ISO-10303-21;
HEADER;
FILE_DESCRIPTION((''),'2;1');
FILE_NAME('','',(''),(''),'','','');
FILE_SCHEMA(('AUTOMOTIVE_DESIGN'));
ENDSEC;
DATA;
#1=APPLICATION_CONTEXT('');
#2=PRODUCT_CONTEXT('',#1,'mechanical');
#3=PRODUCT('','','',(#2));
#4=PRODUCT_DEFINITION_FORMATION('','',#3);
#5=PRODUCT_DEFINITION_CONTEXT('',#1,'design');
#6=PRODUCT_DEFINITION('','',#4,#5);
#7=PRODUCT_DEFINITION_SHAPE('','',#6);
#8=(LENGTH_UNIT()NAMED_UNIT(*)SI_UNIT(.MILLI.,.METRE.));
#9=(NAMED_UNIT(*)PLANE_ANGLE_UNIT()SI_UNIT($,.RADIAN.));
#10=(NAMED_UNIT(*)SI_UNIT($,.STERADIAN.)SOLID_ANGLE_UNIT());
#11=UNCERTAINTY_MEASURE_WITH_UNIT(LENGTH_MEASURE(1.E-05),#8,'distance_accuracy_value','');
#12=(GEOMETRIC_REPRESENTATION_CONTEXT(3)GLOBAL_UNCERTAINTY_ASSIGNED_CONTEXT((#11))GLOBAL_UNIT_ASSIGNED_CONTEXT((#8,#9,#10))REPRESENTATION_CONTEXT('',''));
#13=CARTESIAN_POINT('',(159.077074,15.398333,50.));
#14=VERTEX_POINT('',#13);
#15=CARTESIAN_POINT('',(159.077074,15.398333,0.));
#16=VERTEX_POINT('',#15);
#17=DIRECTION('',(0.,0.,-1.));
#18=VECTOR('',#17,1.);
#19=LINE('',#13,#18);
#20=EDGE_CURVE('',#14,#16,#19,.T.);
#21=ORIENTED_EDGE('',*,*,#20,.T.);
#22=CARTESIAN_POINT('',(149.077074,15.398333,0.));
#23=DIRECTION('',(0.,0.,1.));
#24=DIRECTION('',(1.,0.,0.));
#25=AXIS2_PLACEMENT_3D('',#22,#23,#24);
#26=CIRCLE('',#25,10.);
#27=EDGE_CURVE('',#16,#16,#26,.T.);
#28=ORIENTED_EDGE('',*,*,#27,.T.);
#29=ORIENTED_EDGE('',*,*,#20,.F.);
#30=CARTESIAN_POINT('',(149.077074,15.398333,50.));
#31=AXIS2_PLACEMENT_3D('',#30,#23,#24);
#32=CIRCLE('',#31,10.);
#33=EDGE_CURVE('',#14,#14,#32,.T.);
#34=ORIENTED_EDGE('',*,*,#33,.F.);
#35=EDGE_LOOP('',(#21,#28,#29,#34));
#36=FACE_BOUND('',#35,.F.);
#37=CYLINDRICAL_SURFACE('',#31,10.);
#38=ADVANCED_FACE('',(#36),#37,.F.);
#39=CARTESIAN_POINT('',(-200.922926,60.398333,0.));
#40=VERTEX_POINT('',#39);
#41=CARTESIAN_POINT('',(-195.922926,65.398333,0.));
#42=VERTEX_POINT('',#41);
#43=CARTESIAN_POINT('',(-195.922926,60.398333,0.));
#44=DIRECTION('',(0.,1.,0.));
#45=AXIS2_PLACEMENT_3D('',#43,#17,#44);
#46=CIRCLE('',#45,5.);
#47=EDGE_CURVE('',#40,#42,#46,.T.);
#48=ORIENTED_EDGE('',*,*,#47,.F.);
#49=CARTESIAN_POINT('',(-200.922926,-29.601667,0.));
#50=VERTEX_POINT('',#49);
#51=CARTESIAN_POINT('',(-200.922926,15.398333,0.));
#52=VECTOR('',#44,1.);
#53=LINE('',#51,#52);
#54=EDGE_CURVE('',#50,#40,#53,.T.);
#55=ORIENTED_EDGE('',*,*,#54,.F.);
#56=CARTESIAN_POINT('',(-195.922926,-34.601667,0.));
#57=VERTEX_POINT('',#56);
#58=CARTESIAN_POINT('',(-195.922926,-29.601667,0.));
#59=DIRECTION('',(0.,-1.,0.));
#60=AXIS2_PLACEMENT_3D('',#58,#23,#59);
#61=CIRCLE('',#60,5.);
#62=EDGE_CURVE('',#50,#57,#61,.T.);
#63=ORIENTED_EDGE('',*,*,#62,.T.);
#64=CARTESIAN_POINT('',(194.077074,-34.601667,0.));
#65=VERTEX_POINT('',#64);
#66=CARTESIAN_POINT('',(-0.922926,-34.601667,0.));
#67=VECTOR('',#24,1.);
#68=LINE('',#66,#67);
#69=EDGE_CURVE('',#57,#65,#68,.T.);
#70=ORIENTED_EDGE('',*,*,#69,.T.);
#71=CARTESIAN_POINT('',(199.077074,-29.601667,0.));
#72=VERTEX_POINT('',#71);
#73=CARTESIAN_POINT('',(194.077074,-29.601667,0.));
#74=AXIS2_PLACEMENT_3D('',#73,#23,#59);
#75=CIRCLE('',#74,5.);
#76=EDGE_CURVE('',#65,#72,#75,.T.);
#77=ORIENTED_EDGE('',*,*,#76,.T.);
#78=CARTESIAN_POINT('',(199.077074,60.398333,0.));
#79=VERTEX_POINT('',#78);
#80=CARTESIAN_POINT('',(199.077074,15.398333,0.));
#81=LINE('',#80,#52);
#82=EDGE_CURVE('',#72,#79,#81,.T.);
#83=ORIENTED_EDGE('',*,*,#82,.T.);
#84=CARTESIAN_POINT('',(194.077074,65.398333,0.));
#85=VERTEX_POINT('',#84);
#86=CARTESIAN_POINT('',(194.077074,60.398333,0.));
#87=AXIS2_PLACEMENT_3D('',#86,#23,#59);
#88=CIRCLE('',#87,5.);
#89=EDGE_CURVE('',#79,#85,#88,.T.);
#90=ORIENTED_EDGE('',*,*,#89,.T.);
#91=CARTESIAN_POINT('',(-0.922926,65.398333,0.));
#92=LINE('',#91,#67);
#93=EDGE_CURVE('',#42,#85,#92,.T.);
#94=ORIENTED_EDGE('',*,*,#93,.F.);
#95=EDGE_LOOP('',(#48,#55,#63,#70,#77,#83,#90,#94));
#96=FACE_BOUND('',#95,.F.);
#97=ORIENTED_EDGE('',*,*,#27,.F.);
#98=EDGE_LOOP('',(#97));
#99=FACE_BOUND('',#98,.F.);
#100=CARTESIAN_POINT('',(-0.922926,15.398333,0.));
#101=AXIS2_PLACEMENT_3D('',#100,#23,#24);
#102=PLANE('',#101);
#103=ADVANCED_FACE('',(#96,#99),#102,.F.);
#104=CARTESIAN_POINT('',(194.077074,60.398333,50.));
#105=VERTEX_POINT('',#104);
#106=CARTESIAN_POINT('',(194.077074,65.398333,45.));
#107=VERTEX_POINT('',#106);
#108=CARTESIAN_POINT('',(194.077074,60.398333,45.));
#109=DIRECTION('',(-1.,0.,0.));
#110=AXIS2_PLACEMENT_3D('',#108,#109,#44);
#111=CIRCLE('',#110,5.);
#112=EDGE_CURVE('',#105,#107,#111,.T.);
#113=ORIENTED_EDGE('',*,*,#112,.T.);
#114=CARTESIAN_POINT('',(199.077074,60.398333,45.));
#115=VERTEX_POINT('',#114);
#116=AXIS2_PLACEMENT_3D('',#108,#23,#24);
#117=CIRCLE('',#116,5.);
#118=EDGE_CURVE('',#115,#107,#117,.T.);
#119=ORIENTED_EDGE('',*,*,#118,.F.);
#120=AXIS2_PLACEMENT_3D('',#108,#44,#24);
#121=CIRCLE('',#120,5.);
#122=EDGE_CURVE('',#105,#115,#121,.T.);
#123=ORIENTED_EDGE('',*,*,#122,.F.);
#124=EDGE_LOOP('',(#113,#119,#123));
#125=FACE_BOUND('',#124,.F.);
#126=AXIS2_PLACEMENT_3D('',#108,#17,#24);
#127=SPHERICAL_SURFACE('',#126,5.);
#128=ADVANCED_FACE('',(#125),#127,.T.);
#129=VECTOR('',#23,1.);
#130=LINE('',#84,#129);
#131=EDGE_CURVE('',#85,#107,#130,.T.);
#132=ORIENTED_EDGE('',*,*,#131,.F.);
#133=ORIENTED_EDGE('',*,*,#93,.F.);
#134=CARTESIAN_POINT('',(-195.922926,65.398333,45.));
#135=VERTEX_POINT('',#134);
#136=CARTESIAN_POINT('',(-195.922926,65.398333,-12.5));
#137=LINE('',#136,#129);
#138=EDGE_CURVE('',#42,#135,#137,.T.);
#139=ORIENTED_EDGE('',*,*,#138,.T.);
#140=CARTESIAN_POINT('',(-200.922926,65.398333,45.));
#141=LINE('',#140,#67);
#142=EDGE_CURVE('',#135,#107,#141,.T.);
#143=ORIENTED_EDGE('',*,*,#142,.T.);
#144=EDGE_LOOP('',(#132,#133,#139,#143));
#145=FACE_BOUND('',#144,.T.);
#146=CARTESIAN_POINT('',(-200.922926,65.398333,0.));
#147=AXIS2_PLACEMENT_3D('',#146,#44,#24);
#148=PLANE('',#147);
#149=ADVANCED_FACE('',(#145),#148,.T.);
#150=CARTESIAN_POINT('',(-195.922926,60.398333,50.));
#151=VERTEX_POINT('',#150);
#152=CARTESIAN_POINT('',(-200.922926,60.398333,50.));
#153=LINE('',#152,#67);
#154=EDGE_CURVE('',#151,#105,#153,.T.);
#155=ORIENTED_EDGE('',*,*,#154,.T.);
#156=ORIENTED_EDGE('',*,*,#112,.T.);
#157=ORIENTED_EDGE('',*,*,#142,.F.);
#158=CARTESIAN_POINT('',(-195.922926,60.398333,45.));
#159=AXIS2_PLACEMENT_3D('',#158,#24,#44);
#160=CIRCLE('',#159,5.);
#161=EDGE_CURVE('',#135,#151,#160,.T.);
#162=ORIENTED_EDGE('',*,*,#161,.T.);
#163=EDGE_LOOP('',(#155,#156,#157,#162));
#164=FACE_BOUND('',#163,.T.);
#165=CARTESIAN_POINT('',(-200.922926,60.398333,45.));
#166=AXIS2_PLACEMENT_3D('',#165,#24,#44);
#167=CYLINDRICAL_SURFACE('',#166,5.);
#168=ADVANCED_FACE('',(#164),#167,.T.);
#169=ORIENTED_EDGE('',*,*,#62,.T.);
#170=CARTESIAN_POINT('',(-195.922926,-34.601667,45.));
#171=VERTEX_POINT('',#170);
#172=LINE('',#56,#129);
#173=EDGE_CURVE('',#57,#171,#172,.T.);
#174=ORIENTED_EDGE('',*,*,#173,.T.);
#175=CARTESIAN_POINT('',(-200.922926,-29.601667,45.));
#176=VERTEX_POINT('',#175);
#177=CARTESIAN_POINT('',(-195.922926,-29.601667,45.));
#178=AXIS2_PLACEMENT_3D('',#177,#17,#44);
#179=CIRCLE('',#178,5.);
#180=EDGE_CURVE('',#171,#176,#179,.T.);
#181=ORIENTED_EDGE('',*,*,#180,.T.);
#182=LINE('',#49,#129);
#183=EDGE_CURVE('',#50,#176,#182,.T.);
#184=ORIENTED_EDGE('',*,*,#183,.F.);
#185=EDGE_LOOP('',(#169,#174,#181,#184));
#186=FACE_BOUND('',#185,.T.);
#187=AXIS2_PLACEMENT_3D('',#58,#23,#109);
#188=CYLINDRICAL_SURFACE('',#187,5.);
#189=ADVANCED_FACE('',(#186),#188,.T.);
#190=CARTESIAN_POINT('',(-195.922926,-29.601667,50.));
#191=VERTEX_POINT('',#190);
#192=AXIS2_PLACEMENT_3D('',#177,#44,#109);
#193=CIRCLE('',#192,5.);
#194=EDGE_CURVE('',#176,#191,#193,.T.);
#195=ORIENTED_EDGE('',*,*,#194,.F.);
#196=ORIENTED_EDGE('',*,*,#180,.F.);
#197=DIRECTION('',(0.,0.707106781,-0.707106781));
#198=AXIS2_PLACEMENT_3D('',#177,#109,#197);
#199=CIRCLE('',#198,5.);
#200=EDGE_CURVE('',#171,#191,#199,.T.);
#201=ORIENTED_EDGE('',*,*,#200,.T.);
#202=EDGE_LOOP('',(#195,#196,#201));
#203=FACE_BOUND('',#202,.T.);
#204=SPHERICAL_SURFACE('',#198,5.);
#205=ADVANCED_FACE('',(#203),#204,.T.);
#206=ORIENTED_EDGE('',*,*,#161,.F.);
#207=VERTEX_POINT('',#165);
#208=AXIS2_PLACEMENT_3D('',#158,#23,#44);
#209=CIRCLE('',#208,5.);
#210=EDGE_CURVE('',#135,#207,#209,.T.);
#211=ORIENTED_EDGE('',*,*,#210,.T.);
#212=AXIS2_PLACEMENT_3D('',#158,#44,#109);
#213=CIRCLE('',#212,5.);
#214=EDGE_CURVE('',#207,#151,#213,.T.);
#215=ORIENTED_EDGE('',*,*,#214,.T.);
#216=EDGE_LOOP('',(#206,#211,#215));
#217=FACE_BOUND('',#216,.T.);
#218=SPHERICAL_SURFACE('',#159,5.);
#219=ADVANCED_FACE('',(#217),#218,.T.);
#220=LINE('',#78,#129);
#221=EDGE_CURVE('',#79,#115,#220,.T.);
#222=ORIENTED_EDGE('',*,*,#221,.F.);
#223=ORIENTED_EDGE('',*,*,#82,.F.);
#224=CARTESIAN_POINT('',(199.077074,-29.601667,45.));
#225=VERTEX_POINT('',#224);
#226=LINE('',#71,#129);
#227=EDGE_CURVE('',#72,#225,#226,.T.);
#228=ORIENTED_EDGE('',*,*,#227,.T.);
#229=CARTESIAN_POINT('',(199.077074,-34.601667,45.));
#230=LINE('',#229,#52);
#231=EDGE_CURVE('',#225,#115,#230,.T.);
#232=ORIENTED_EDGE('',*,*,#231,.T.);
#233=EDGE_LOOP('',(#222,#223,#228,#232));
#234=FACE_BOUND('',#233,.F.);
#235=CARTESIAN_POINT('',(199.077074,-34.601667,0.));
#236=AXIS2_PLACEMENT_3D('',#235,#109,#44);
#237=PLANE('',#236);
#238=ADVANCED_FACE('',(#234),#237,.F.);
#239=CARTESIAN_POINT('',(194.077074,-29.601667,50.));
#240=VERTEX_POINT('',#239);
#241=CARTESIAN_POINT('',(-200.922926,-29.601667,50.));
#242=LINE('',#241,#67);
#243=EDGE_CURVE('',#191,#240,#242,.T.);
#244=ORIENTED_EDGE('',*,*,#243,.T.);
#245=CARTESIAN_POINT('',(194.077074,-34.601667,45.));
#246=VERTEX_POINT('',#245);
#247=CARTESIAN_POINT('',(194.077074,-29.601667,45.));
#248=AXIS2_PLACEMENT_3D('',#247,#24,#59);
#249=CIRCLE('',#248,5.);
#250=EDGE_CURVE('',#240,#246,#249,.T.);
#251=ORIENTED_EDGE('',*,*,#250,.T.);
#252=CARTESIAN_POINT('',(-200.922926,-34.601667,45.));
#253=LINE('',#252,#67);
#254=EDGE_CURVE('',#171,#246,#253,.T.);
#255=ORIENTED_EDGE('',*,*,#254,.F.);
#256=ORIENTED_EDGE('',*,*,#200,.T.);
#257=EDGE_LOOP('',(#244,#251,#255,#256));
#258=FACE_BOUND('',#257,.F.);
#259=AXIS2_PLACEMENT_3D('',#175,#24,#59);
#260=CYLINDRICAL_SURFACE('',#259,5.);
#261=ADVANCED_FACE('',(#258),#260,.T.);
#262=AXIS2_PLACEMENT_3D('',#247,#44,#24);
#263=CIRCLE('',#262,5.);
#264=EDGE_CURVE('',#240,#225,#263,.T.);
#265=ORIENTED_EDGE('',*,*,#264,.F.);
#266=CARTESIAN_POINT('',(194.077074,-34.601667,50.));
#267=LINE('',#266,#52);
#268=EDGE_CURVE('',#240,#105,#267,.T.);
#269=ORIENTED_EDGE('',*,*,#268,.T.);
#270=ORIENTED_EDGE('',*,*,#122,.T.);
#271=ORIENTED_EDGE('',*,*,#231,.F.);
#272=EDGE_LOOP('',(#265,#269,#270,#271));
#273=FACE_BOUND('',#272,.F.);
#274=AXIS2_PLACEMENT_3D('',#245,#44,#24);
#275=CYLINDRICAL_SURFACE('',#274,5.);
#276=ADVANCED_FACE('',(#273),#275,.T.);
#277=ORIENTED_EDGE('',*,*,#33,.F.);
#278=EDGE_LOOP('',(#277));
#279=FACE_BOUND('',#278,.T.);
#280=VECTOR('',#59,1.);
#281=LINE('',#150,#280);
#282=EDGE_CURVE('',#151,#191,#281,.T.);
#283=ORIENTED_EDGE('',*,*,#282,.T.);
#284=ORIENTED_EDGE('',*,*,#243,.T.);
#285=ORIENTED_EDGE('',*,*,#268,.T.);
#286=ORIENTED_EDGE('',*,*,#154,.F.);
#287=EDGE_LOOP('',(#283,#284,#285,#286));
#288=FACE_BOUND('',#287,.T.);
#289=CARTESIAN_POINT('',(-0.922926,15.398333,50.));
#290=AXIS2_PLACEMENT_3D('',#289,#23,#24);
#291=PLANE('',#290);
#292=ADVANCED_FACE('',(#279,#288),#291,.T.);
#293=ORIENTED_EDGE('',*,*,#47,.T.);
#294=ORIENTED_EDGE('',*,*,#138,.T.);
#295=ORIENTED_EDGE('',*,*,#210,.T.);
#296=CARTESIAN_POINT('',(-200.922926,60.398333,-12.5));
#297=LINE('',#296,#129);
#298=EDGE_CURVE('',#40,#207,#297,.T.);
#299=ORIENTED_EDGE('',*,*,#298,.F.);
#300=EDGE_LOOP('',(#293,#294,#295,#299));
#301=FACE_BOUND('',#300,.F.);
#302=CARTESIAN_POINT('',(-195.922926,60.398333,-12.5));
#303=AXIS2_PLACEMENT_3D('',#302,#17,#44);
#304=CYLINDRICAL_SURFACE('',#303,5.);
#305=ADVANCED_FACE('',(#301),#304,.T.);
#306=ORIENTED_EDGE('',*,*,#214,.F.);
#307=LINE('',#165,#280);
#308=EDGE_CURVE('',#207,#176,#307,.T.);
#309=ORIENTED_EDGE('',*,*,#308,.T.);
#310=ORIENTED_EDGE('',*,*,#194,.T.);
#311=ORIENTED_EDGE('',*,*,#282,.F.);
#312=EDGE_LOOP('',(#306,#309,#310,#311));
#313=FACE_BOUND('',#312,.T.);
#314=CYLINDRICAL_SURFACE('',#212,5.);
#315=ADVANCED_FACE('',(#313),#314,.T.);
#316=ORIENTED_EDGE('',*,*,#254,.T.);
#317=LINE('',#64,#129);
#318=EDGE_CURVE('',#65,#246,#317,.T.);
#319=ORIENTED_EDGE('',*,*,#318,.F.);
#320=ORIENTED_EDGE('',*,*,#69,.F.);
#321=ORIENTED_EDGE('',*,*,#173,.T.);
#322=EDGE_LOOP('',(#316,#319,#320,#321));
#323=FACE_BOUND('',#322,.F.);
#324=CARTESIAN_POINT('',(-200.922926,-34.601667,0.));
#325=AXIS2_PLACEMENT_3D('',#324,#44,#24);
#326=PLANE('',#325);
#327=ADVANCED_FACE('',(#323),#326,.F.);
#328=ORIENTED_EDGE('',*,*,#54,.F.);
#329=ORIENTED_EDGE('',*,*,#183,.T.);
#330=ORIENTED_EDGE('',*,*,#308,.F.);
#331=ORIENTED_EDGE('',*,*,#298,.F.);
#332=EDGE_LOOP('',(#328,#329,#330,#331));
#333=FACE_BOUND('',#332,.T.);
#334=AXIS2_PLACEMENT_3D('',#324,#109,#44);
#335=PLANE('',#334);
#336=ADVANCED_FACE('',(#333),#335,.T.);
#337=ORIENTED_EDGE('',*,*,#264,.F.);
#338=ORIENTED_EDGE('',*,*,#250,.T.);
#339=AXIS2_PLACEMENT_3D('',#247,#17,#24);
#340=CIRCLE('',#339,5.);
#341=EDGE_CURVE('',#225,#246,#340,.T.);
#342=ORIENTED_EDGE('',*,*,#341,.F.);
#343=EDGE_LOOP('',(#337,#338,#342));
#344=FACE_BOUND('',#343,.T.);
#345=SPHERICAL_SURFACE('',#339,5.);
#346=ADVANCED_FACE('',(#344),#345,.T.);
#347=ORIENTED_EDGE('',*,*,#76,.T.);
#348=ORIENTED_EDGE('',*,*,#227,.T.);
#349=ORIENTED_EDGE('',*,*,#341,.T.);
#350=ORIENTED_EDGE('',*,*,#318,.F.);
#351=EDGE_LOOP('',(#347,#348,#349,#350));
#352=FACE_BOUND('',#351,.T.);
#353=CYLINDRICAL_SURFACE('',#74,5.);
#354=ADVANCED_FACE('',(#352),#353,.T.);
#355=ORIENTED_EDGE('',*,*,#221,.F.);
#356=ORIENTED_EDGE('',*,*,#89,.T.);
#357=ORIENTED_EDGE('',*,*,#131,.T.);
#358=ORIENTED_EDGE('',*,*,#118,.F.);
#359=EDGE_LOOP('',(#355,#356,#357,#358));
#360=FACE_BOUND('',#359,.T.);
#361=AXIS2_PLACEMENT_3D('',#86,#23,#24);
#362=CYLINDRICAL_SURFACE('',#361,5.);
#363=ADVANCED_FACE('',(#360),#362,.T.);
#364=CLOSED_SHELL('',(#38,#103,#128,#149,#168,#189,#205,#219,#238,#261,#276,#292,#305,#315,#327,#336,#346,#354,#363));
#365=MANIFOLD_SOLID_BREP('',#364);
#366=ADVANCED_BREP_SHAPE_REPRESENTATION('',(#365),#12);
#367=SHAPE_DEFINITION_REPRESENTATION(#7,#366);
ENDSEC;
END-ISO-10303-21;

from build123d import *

# Parameters (mm, degrees)
F0_W         = 400
F0_H         = 100
F1_DEPTH     = 50
F2_R         = 5
F3_T1_DEPTH  = 57.5
F3_T3_DEPTH  = 90
F3_S7_W      = 5
F3_S7_H      = 5
F3_T8_DEPTH  = 5
F3_T12_ANGLE = 90
F4_R         = 10
F5_DEPTH     = 50.001


# Not quite as in the source:
# - a fillet or chamfer that OpenCascade refuses, or shapes differently, is made with other operations: its cross-section is extruded or revolved along the edge and cut away or added


with BuildPart() as f1:
    # F0 (on Top) → F1 (new body)
    with BuildSketch(Plane.XY):
        with Locations((-0.9229257703, 15.3983329495)):
            Rectangle(F0_W, F0_H)
    extrude(amount=F1_DEPTH)

    # F2
    f2_edges = [f1.edges().sort_by_distance(p)[0] for p in [
        (-200.922926, -34.601667, 25),
        (199.077074, -34.601667, 25),
        (199.077074, 65.398333, 25),
        (199.077074, 15.398333, 50),
        (-0.922926, -34.601667, 50),
        (-0.922926, 65.398333, 50),
    ]]
    fillet(f2_edges, radius=F2_R)

    # F3: fillet of radius 5 on 1 edges, made by hand

    # F3_s2 → F3_t1 (cut)
    with BuildSketch(Plane.XY.offset(-12.5)):
        with BuildLine():
            ThreePointArc((-195.9229257703, 65.3983329495), (-199.4584596762, 63.9338668555), (-200.9229257703, 60.3983329495))
            Line((-200.9229257703, 60.3983329495), (-200.9229257703, 65.3983329495))
            Line((-200.9229257703, 65.3983329495), (-195.9229257703, 65.3983329495))
        make_face()
    extrude(amount=F3_T1_DEPTH, mode=Mode.SUBTRACT)

    # F3_s4 → F3_t3 (cut)
    with BuildSketch(Plane.XZ.offset(-60.3983329495)):
        with BuildLine():
            ThreePointArc((-200.9229257703, 45), (-199.4584596762, 48.5355339059), (-195.9229257703, 50))
            Line((-195.9229257703, 50), (-200.9229257703, 50))
            Line((-200.9229257703, 50), (-200.9229257703, 45))
        make_face()
    extrude(amount=F3_T3_DEPTH, mode=Mode.SUBTRACT)


with BuildPart() as f3_tool6:
    # F3_s7 → F3_t8 (new body)
    with BuildSketch(Plane.YZ.offset(-195.9229257703)):
        with Locations((-32.1016670505, 47.5)):
            Rectangle(F3_S7_W, F3_S7_H)
    extrude(amount=-F3_T8_DEPTH)

    # F3_s9 → F3_t10 (revolve, cut)
    with BuildSketch(Plane(origin=(-195.9229257703, -29.6016670505, 45), x_dir=(0, 0.7071067812, -0.7071067812), z_dir=(0, 0.7071067812, 0.7071067812))):
        with BuildLine():
            ThreePointArc((0, -5), (5, 0), (0, 5))
            Line((0, 5), (0, -5))
        make_face()
    revolve(axis=Axis((-195.9229257703, -29.6016670505, 45), (-1, 0, 0)), mode=Mode.SUBTRACT)


with BuildPart() as f1_1:
    add(f1.part)

    # F3_t5: cut F3_tool6
    add(f3_tool6.part, mode=Mode.SUBTRACT)

    # F3_s11 → F3_t12 (revolve, cut)
    with BuildSketch(Plane.XY.offset(45)):
        with BuildLine():
            ThreePointArc((-200.9229257703, 60.3983329495), (-199.4584596762, 63.9338668555), (-195.9229257703, 65.3983329495))
            Line((-195.9229257703, 65.3983329495), (-200.9229257703, 65.3983329495))
            Line((-200.9229257703, 65.3983329495), (-200.9229257703, 60.3983329495))
        make_face()
    revolve(axis=Axis((-200.9229257703, 60.3983329495, 45), (1, 0, 0)), revolution_arc=F3_T12_ANGLE, mode=Mode.SUBTRACT)

    # F4 (on face) → F5 (cut, through all)
    with BuildSketch(Plane.XY.offset(50)):
        with Locations((149.0770742297, 15.3983329495)):
            Circle(F4_R)
    extrude(amount=-F5_DEPTH, mode=Mode.SUBTRACT)


solid = f1_1.part
